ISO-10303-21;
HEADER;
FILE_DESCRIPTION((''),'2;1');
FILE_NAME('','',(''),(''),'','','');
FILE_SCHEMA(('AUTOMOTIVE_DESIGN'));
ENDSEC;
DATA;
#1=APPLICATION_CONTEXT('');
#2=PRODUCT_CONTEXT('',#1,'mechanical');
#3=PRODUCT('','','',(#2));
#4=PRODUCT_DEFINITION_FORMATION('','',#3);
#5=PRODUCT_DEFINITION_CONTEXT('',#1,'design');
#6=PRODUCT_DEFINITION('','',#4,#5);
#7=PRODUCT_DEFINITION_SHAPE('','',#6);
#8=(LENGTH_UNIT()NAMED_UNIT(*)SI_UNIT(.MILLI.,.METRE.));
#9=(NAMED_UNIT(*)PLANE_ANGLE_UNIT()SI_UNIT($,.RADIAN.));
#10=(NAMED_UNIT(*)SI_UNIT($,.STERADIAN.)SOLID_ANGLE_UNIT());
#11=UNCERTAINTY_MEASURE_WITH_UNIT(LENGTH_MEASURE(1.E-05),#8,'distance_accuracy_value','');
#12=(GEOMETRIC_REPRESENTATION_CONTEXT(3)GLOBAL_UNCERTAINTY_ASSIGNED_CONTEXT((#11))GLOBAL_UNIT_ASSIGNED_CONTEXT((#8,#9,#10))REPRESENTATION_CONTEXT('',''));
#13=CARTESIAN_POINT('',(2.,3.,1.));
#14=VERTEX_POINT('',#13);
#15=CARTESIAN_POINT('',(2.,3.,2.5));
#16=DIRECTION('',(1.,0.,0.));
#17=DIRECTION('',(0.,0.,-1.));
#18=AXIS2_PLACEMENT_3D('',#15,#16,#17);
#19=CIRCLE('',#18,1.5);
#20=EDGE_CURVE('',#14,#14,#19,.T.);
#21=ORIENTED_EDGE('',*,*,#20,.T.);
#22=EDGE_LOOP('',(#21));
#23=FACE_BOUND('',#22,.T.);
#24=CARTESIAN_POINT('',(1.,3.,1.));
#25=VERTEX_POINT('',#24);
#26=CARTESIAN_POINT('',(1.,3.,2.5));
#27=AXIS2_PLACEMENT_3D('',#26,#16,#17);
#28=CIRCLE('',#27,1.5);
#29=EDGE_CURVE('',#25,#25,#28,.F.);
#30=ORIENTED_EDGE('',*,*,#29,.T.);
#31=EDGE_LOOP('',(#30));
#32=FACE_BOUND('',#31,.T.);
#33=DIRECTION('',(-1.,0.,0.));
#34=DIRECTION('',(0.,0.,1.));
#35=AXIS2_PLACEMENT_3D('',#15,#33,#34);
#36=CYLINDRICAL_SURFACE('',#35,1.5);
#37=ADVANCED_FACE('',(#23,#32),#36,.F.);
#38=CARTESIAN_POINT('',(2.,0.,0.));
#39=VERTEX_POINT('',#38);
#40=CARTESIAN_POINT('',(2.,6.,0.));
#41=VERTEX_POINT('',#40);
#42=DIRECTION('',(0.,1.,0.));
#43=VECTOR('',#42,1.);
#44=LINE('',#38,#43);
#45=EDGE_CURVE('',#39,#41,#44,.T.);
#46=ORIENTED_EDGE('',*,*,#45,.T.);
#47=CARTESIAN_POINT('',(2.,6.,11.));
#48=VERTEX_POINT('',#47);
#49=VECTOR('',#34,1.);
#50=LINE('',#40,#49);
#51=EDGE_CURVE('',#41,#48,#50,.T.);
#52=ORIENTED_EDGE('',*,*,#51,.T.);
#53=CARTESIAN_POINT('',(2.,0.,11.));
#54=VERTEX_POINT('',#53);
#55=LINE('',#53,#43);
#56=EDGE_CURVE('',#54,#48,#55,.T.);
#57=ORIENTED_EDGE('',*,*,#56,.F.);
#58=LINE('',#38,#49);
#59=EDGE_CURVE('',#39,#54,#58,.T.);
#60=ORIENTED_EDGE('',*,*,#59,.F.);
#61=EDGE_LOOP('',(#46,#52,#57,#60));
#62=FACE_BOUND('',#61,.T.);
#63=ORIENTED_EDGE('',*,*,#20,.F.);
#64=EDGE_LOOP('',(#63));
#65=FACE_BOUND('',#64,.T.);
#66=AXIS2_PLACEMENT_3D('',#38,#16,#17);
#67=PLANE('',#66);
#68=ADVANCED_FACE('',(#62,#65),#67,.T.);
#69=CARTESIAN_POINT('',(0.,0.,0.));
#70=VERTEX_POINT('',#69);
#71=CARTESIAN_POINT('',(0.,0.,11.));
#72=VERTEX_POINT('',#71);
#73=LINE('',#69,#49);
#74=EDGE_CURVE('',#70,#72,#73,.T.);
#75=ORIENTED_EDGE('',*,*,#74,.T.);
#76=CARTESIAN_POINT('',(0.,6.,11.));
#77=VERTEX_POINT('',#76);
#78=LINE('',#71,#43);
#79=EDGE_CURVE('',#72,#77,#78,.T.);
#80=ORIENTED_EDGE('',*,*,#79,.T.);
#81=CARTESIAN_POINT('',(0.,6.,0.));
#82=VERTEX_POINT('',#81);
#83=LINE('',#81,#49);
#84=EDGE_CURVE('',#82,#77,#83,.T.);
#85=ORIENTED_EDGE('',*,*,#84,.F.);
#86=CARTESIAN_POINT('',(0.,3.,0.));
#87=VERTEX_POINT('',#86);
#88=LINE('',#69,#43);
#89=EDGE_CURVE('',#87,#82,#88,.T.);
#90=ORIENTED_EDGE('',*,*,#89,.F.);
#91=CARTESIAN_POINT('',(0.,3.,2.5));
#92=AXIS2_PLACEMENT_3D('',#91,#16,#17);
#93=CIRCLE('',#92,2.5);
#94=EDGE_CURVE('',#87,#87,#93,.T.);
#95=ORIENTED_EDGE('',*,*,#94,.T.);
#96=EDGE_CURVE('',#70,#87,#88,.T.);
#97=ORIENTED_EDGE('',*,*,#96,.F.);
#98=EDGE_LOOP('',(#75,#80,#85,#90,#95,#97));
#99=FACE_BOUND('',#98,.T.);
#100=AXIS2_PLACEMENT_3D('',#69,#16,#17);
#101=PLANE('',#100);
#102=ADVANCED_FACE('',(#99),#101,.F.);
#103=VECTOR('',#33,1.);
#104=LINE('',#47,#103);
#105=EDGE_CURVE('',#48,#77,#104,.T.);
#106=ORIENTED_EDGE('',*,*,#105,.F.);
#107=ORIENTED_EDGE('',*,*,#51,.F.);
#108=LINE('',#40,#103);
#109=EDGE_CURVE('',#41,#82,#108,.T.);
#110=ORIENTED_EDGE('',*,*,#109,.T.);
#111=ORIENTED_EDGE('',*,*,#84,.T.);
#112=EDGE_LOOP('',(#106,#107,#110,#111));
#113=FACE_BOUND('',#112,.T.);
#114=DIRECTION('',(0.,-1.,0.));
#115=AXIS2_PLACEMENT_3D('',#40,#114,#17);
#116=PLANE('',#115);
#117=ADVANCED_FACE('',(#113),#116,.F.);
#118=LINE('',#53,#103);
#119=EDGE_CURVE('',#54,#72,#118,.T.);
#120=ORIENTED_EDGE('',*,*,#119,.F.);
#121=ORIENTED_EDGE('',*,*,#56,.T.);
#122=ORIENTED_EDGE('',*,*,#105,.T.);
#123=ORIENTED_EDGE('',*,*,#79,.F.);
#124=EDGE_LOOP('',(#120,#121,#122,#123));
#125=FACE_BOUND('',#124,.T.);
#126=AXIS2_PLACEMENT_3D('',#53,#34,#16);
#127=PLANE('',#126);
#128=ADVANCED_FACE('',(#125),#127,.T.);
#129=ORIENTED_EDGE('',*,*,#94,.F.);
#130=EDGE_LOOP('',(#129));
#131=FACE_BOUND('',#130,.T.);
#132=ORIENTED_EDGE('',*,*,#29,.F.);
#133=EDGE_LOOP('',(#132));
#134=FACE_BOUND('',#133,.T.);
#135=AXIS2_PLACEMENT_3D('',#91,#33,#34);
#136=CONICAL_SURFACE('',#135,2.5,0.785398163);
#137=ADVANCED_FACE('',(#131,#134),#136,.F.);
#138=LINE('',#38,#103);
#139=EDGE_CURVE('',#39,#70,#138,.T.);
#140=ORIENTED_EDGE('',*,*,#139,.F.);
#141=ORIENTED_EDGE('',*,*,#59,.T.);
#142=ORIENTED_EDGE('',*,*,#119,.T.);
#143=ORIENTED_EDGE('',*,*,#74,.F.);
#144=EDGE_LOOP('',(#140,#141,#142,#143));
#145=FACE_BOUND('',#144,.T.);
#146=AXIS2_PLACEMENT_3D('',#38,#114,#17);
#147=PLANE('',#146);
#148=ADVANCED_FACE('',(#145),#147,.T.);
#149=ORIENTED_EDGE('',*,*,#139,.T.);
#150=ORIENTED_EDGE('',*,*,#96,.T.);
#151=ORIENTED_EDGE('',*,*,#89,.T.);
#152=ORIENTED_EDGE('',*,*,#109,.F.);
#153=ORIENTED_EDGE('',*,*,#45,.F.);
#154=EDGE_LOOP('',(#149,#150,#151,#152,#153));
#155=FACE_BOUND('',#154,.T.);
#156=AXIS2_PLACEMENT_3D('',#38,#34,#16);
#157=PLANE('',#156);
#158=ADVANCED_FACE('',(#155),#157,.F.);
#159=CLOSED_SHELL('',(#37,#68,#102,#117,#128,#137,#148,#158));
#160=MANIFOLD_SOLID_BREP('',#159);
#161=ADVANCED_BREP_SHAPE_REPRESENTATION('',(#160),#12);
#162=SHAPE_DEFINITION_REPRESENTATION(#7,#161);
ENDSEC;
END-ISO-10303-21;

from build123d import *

# Parameters (mm, degrees)
SKETCH_1_W      = 11
SKETCH_1_H      = 6
SKETCH_1_R      = 1.5
EXTRUDE_1_DEPTH = 2
CHAMFER_1_SIZE  = 1


with BuildPart() as part:
    # Эскиз1 → Бобышка-Вытянуть1 (new body)
    with BuildSketch(Plane(origin=(0, 0, 0), x_dir=(0, 0, -1), z_dir=(1, 0, 0))):
        with Locations((-5.5, 3)):
            Rectangle(SKETCH_1_W, SKETCH_1_H)
        with Locations((-2.5, 3)):
            Circle(SKETCH_1_R, mode=Mode.SUBTRACT)
    extrude(amount=EXTRUDE_1_DEPTH)

    # Фаска1
    chamfer_1_edges = [part.edges().sort_by_distance(p)[0] for p in [
        (0, 3, 4),
    ]]
    chamfer(chamfer_1_edges, length=CHAMFER_1_SIZE - 0.0001)  # a hair under: the kernel refuses the full size


solid = part.part
